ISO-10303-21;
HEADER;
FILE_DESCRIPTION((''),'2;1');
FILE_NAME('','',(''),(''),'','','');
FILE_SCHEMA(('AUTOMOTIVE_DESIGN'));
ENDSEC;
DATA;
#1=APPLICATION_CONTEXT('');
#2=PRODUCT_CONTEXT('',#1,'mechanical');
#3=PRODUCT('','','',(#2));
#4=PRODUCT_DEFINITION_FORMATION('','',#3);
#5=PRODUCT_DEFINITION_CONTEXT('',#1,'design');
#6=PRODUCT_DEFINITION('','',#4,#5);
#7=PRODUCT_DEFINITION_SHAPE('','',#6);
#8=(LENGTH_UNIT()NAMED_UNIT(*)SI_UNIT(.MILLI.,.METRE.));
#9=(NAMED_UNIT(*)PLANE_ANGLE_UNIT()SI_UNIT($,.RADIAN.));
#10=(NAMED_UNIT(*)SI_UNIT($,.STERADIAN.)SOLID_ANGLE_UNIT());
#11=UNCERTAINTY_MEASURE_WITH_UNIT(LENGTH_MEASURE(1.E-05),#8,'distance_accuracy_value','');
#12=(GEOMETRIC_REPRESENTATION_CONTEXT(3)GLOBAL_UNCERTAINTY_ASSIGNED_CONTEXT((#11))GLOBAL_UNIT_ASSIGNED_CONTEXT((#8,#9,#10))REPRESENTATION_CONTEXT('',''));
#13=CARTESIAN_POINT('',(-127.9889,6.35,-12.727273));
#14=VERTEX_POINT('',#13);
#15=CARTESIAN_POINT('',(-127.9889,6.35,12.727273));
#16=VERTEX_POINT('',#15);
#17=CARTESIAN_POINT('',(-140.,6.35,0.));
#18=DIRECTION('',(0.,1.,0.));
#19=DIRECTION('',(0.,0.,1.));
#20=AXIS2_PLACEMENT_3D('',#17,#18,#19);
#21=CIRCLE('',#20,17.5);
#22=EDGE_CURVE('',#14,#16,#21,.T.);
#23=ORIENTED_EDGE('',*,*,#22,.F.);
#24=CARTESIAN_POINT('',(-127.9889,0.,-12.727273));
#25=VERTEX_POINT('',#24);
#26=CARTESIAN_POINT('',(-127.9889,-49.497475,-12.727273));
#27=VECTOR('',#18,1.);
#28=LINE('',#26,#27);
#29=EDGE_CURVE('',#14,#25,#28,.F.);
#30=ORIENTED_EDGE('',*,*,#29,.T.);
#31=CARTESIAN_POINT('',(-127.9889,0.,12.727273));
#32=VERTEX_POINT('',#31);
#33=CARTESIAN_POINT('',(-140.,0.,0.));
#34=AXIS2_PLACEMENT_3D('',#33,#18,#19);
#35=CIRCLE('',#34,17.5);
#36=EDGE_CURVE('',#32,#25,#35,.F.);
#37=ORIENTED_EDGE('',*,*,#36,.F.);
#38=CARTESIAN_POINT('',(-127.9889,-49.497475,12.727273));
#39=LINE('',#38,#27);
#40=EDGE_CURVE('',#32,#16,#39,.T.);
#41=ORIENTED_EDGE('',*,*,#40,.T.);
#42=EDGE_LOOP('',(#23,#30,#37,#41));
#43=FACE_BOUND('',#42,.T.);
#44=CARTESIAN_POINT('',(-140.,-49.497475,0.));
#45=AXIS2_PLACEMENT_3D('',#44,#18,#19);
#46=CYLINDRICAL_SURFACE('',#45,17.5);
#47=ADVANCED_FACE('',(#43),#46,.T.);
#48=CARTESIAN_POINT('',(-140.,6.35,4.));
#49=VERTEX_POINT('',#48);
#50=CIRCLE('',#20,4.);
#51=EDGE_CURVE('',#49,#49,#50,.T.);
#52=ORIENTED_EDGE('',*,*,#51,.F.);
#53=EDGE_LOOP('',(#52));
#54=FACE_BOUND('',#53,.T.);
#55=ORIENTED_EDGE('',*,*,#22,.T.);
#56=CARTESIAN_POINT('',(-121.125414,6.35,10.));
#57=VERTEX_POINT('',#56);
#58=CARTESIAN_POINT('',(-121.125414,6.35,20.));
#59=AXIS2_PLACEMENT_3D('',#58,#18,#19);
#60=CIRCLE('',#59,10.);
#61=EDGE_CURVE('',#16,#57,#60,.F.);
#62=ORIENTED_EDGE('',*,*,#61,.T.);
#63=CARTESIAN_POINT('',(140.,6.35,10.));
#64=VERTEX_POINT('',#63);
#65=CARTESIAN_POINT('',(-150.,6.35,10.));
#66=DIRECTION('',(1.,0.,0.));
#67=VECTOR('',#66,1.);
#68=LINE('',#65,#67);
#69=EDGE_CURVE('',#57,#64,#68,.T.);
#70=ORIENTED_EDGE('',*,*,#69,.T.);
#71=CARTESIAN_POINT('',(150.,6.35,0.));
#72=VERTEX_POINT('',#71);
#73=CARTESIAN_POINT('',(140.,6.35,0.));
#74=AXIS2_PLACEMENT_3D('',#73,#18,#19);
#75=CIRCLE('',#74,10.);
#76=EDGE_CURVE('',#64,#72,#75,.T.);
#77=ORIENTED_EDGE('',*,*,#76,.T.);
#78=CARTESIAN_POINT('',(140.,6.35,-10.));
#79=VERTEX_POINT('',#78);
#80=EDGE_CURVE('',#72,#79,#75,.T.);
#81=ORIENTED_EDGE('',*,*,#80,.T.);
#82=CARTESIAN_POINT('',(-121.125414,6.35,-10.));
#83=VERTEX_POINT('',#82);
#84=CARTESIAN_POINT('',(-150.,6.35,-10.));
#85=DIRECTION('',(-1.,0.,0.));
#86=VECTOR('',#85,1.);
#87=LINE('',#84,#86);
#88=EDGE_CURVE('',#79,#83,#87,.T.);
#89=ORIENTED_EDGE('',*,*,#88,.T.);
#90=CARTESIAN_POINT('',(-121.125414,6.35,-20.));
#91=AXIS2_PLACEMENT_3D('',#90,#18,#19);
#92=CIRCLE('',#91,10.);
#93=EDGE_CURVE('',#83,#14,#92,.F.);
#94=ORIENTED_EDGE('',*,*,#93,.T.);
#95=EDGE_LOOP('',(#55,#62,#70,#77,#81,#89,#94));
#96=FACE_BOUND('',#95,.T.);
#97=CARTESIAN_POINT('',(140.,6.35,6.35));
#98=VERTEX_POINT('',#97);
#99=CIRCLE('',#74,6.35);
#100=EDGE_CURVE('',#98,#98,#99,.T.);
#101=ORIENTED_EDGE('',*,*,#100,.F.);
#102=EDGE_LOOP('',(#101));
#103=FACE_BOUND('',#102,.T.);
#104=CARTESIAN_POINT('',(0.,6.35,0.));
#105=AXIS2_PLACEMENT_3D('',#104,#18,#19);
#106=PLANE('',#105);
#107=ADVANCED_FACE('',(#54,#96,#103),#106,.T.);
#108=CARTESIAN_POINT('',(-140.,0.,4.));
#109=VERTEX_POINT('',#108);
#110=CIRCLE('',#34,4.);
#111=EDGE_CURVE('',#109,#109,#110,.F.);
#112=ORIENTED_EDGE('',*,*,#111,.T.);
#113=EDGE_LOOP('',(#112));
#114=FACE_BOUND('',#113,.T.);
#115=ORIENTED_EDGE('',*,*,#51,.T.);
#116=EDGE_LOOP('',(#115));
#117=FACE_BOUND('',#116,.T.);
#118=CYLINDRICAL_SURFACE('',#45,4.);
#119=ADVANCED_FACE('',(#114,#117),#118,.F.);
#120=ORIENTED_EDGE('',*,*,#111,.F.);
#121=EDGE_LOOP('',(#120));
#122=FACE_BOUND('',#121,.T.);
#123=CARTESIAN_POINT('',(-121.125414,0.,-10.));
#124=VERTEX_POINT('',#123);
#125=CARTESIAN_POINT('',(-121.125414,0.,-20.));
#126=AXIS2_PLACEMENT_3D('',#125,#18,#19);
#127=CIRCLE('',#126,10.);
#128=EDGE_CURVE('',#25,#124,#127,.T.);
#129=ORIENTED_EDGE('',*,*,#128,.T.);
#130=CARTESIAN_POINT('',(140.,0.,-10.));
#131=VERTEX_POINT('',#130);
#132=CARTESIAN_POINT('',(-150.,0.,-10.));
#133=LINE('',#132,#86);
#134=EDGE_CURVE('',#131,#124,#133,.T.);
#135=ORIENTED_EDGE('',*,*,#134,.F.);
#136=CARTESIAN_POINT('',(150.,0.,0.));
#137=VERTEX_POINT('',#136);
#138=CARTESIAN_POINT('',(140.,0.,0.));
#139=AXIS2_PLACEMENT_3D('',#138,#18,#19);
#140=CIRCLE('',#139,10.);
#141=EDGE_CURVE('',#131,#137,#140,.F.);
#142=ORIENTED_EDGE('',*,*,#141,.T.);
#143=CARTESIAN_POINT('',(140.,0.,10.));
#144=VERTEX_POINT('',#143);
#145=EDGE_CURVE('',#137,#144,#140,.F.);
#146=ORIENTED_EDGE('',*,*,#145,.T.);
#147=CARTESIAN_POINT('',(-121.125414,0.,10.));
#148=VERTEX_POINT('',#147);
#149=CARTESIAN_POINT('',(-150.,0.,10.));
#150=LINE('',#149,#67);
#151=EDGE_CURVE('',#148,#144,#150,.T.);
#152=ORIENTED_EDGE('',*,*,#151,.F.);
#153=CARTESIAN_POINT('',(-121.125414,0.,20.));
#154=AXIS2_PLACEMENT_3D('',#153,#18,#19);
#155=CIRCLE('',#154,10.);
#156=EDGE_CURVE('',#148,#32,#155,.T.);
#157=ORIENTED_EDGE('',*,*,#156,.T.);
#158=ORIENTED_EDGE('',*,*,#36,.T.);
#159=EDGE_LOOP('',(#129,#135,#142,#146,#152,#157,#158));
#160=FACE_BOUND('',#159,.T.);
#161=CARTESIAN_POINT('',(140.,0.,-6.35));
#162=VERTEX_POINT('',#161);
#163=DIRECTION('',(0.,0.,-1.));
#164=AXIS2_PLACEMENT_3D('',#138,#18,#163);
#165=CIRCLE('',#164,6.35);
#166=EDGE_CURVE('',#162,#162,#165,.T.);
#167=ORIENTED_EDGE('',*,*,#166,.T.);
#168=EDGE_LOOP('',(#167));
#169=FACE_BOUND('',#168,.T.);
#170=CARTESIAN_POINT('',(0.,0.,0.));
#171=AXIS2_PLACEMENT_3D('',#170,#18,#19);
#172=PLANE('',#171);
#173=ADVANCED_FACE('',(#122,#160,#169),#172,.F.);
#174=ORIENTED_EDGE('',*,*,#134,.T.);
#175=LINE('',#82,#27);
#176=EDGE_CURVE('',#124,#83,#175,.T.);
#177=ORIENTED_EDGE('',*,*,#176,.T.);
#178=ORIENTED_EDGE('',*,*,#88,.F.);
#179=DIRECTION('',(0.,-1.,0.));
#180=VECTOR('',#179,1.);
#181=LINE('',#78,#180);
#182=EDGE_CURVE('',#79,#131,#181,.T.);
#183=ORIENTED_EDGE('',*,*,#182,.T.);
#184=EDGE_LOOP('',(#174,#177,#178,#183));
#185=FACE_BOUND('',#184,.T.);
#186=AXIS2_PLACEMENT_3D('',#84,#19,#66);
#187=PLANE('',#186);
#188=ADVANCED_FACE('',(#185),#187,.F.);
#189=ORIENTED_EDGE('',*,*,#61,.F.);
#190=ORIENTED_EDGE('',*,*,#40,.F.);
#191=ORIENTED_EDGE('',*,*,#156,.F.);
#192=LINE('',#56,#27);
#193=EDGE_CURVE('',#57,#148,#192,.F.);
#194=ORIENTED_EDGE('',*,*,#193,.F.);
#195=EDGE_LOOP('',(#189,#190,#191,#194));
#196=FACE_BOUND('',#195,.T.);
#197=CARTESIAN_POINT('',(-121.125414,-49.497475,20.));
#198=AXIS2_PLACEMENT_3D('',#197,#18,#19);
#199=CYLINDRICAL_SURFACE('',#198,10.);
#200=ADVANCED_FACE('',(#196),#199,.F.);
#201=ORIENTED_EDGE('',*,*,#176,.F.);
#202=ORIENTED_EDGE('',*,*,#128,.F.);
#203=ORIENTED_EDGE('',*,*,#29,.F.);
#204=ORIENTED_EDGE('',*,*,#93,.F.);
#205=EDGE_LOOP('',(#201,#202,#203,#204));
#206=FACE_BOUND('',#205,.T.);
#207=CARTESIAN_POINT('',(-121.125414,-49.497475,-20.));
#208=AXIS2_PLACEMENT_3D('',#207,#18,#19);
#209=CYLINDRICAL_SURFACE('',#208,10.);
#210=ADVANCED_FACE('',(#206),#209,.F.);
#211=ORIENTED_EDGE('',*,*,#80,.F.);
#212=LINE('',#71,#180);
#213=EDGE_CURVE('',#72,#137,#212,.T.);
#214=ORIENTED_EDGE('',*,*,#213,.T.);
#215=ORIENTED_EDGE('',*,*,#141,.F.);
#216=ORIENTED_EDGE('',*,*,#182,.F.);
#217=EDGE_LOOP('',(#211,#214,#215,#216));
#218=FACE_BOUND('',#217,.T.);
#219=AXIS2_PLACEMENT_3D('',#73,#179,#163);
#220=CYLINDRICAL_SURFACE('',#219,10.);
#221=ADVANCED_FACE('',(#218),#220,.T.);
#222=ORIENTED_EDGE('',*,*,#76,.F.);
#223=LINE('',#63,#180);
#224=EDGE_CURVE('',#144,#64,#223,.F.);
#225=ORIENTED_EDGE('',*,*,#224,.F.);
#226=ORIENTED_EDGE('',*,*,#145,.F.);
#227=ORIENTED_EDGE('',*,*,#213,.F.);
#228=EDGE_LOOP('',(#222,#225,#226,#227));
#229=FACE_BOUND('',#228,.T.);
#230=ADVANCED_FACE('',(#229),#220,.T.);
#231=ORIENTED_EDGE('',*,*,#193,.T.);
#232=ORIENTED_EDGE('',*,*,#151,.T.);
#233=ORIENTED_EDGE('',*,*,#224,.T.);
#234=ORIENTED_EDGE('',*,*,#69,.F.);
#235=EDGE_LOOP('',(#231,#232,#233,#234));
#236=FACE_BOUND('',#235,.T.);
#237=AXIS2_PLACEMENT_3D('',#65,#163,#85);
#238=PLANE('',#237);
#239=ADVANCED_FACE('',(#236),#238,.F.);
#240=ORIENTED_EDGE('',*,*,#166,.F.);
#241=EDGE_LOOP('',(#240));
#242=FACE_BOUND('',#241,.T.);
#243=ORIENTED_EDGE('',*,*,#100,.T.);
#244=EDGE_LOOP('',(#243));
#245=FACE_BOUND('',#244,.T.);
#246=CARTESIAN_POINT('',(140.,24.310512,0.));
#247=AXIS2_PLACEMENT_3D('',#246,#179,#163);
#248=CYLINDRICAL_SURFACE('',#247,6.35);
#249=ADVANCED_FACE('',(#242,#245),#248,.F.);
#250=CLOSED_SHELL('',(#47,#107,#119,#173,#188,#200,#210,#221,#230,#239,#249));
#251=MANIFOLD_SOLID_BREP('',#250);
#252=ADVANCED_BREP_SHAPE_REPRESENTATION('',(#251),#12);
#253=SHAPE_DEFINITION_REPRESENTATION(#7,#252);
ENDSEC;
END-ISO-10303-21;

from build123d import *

# Parameters (mm, degrees)
SKETCH1_W           = 300
SKETCH1_H           = 20
BOSS_EXTRUDE1_DEPTH = 6.35
SKETCH2_R           = 6.35
CUT_EXTRUDE1_DEPTH  = 6.35
CONG_1_R            = 10
SKETCH3_R           = 17.5
SKETCH3_R_2         = 4
BOSS_EXTRUDE2_DEPTH = 6.35
FILLET2_R           = 10


with BuildPart() as part:
    # Sketch1 → Boss-Extrude1 (new body)
    with BuildSketch(Plane(origin=(0, 0, 0), x_dir=(1, 0, 0), z_dir=(0, 1, 0))):
        Rectangle(SKETCH1_W, SKETCH1_H)
    extrude(amount=BOSS_EXTRUDE1_DEPTH)

    # Sketch2 → Cut-Extrude1 (cut)
    with BuildSketch(Plane(origin=(0, 0, 0), x_dir=(-1, 0, 0), z_dir=(0, -1, 0))):
        with Locations(Location((140, 0, 0), (0, 0, 90))):
            Circle(SKETCH2_R)
    cut_extrude1 = extrude(amount=-CUT_EXTRUDE1_DEPTH, mode=Mode.SUBTRACT)

    # Mirror1: Cut-Extrude1 across plane
    add(cut_extrude1.mirror(Plane(origin=(0, 0, 0), x_dir=(0, 0, 1), z_dir=(1, 0, 0))), mode=Mode.SUBTRACT)

    # Congé1
    cong_1_edges = [part.edges().sort_by_distance(p)[0] for p in [
        (-150, 3.175, -10),
        (-150, 3.175, 10),
        (150, 3.175, -10),
        (150, 3.175, 10),
    ]]
    fillet(cong_1_edges, radius=CONG_1_R - 0.0001)  # a hair under: the kernel refuses the full size

    # Sketch3 → Boss-Extrude2 (add)
    with BuildSketch(Plane(origin=(0, 6.35, 0), x_dir=(1, 0, 0), z_dir=(0, 1, 0))):
        with Locations((-140, 0)):
            Circle(SKETCH3_R)
        with Locations(Location((-140, 0, 0), (0, 0, 270))):
            Circle(SKETCH3_R_2, mode=Mode.SUBTRACT)
    extrude(amount=-BOSS_EXTRUDE2_DEPTH)

    # Fillet2
    fillet2_edges = [part.edges().sort_by_distance(p)[0] for p in [
        (-125.638593384, 3.175, 10),
        (-125.638593384, 3.175, -10),
    ]]
    fillet(fillet2_edges, radius=FILLET2_R)


solid = part.part
